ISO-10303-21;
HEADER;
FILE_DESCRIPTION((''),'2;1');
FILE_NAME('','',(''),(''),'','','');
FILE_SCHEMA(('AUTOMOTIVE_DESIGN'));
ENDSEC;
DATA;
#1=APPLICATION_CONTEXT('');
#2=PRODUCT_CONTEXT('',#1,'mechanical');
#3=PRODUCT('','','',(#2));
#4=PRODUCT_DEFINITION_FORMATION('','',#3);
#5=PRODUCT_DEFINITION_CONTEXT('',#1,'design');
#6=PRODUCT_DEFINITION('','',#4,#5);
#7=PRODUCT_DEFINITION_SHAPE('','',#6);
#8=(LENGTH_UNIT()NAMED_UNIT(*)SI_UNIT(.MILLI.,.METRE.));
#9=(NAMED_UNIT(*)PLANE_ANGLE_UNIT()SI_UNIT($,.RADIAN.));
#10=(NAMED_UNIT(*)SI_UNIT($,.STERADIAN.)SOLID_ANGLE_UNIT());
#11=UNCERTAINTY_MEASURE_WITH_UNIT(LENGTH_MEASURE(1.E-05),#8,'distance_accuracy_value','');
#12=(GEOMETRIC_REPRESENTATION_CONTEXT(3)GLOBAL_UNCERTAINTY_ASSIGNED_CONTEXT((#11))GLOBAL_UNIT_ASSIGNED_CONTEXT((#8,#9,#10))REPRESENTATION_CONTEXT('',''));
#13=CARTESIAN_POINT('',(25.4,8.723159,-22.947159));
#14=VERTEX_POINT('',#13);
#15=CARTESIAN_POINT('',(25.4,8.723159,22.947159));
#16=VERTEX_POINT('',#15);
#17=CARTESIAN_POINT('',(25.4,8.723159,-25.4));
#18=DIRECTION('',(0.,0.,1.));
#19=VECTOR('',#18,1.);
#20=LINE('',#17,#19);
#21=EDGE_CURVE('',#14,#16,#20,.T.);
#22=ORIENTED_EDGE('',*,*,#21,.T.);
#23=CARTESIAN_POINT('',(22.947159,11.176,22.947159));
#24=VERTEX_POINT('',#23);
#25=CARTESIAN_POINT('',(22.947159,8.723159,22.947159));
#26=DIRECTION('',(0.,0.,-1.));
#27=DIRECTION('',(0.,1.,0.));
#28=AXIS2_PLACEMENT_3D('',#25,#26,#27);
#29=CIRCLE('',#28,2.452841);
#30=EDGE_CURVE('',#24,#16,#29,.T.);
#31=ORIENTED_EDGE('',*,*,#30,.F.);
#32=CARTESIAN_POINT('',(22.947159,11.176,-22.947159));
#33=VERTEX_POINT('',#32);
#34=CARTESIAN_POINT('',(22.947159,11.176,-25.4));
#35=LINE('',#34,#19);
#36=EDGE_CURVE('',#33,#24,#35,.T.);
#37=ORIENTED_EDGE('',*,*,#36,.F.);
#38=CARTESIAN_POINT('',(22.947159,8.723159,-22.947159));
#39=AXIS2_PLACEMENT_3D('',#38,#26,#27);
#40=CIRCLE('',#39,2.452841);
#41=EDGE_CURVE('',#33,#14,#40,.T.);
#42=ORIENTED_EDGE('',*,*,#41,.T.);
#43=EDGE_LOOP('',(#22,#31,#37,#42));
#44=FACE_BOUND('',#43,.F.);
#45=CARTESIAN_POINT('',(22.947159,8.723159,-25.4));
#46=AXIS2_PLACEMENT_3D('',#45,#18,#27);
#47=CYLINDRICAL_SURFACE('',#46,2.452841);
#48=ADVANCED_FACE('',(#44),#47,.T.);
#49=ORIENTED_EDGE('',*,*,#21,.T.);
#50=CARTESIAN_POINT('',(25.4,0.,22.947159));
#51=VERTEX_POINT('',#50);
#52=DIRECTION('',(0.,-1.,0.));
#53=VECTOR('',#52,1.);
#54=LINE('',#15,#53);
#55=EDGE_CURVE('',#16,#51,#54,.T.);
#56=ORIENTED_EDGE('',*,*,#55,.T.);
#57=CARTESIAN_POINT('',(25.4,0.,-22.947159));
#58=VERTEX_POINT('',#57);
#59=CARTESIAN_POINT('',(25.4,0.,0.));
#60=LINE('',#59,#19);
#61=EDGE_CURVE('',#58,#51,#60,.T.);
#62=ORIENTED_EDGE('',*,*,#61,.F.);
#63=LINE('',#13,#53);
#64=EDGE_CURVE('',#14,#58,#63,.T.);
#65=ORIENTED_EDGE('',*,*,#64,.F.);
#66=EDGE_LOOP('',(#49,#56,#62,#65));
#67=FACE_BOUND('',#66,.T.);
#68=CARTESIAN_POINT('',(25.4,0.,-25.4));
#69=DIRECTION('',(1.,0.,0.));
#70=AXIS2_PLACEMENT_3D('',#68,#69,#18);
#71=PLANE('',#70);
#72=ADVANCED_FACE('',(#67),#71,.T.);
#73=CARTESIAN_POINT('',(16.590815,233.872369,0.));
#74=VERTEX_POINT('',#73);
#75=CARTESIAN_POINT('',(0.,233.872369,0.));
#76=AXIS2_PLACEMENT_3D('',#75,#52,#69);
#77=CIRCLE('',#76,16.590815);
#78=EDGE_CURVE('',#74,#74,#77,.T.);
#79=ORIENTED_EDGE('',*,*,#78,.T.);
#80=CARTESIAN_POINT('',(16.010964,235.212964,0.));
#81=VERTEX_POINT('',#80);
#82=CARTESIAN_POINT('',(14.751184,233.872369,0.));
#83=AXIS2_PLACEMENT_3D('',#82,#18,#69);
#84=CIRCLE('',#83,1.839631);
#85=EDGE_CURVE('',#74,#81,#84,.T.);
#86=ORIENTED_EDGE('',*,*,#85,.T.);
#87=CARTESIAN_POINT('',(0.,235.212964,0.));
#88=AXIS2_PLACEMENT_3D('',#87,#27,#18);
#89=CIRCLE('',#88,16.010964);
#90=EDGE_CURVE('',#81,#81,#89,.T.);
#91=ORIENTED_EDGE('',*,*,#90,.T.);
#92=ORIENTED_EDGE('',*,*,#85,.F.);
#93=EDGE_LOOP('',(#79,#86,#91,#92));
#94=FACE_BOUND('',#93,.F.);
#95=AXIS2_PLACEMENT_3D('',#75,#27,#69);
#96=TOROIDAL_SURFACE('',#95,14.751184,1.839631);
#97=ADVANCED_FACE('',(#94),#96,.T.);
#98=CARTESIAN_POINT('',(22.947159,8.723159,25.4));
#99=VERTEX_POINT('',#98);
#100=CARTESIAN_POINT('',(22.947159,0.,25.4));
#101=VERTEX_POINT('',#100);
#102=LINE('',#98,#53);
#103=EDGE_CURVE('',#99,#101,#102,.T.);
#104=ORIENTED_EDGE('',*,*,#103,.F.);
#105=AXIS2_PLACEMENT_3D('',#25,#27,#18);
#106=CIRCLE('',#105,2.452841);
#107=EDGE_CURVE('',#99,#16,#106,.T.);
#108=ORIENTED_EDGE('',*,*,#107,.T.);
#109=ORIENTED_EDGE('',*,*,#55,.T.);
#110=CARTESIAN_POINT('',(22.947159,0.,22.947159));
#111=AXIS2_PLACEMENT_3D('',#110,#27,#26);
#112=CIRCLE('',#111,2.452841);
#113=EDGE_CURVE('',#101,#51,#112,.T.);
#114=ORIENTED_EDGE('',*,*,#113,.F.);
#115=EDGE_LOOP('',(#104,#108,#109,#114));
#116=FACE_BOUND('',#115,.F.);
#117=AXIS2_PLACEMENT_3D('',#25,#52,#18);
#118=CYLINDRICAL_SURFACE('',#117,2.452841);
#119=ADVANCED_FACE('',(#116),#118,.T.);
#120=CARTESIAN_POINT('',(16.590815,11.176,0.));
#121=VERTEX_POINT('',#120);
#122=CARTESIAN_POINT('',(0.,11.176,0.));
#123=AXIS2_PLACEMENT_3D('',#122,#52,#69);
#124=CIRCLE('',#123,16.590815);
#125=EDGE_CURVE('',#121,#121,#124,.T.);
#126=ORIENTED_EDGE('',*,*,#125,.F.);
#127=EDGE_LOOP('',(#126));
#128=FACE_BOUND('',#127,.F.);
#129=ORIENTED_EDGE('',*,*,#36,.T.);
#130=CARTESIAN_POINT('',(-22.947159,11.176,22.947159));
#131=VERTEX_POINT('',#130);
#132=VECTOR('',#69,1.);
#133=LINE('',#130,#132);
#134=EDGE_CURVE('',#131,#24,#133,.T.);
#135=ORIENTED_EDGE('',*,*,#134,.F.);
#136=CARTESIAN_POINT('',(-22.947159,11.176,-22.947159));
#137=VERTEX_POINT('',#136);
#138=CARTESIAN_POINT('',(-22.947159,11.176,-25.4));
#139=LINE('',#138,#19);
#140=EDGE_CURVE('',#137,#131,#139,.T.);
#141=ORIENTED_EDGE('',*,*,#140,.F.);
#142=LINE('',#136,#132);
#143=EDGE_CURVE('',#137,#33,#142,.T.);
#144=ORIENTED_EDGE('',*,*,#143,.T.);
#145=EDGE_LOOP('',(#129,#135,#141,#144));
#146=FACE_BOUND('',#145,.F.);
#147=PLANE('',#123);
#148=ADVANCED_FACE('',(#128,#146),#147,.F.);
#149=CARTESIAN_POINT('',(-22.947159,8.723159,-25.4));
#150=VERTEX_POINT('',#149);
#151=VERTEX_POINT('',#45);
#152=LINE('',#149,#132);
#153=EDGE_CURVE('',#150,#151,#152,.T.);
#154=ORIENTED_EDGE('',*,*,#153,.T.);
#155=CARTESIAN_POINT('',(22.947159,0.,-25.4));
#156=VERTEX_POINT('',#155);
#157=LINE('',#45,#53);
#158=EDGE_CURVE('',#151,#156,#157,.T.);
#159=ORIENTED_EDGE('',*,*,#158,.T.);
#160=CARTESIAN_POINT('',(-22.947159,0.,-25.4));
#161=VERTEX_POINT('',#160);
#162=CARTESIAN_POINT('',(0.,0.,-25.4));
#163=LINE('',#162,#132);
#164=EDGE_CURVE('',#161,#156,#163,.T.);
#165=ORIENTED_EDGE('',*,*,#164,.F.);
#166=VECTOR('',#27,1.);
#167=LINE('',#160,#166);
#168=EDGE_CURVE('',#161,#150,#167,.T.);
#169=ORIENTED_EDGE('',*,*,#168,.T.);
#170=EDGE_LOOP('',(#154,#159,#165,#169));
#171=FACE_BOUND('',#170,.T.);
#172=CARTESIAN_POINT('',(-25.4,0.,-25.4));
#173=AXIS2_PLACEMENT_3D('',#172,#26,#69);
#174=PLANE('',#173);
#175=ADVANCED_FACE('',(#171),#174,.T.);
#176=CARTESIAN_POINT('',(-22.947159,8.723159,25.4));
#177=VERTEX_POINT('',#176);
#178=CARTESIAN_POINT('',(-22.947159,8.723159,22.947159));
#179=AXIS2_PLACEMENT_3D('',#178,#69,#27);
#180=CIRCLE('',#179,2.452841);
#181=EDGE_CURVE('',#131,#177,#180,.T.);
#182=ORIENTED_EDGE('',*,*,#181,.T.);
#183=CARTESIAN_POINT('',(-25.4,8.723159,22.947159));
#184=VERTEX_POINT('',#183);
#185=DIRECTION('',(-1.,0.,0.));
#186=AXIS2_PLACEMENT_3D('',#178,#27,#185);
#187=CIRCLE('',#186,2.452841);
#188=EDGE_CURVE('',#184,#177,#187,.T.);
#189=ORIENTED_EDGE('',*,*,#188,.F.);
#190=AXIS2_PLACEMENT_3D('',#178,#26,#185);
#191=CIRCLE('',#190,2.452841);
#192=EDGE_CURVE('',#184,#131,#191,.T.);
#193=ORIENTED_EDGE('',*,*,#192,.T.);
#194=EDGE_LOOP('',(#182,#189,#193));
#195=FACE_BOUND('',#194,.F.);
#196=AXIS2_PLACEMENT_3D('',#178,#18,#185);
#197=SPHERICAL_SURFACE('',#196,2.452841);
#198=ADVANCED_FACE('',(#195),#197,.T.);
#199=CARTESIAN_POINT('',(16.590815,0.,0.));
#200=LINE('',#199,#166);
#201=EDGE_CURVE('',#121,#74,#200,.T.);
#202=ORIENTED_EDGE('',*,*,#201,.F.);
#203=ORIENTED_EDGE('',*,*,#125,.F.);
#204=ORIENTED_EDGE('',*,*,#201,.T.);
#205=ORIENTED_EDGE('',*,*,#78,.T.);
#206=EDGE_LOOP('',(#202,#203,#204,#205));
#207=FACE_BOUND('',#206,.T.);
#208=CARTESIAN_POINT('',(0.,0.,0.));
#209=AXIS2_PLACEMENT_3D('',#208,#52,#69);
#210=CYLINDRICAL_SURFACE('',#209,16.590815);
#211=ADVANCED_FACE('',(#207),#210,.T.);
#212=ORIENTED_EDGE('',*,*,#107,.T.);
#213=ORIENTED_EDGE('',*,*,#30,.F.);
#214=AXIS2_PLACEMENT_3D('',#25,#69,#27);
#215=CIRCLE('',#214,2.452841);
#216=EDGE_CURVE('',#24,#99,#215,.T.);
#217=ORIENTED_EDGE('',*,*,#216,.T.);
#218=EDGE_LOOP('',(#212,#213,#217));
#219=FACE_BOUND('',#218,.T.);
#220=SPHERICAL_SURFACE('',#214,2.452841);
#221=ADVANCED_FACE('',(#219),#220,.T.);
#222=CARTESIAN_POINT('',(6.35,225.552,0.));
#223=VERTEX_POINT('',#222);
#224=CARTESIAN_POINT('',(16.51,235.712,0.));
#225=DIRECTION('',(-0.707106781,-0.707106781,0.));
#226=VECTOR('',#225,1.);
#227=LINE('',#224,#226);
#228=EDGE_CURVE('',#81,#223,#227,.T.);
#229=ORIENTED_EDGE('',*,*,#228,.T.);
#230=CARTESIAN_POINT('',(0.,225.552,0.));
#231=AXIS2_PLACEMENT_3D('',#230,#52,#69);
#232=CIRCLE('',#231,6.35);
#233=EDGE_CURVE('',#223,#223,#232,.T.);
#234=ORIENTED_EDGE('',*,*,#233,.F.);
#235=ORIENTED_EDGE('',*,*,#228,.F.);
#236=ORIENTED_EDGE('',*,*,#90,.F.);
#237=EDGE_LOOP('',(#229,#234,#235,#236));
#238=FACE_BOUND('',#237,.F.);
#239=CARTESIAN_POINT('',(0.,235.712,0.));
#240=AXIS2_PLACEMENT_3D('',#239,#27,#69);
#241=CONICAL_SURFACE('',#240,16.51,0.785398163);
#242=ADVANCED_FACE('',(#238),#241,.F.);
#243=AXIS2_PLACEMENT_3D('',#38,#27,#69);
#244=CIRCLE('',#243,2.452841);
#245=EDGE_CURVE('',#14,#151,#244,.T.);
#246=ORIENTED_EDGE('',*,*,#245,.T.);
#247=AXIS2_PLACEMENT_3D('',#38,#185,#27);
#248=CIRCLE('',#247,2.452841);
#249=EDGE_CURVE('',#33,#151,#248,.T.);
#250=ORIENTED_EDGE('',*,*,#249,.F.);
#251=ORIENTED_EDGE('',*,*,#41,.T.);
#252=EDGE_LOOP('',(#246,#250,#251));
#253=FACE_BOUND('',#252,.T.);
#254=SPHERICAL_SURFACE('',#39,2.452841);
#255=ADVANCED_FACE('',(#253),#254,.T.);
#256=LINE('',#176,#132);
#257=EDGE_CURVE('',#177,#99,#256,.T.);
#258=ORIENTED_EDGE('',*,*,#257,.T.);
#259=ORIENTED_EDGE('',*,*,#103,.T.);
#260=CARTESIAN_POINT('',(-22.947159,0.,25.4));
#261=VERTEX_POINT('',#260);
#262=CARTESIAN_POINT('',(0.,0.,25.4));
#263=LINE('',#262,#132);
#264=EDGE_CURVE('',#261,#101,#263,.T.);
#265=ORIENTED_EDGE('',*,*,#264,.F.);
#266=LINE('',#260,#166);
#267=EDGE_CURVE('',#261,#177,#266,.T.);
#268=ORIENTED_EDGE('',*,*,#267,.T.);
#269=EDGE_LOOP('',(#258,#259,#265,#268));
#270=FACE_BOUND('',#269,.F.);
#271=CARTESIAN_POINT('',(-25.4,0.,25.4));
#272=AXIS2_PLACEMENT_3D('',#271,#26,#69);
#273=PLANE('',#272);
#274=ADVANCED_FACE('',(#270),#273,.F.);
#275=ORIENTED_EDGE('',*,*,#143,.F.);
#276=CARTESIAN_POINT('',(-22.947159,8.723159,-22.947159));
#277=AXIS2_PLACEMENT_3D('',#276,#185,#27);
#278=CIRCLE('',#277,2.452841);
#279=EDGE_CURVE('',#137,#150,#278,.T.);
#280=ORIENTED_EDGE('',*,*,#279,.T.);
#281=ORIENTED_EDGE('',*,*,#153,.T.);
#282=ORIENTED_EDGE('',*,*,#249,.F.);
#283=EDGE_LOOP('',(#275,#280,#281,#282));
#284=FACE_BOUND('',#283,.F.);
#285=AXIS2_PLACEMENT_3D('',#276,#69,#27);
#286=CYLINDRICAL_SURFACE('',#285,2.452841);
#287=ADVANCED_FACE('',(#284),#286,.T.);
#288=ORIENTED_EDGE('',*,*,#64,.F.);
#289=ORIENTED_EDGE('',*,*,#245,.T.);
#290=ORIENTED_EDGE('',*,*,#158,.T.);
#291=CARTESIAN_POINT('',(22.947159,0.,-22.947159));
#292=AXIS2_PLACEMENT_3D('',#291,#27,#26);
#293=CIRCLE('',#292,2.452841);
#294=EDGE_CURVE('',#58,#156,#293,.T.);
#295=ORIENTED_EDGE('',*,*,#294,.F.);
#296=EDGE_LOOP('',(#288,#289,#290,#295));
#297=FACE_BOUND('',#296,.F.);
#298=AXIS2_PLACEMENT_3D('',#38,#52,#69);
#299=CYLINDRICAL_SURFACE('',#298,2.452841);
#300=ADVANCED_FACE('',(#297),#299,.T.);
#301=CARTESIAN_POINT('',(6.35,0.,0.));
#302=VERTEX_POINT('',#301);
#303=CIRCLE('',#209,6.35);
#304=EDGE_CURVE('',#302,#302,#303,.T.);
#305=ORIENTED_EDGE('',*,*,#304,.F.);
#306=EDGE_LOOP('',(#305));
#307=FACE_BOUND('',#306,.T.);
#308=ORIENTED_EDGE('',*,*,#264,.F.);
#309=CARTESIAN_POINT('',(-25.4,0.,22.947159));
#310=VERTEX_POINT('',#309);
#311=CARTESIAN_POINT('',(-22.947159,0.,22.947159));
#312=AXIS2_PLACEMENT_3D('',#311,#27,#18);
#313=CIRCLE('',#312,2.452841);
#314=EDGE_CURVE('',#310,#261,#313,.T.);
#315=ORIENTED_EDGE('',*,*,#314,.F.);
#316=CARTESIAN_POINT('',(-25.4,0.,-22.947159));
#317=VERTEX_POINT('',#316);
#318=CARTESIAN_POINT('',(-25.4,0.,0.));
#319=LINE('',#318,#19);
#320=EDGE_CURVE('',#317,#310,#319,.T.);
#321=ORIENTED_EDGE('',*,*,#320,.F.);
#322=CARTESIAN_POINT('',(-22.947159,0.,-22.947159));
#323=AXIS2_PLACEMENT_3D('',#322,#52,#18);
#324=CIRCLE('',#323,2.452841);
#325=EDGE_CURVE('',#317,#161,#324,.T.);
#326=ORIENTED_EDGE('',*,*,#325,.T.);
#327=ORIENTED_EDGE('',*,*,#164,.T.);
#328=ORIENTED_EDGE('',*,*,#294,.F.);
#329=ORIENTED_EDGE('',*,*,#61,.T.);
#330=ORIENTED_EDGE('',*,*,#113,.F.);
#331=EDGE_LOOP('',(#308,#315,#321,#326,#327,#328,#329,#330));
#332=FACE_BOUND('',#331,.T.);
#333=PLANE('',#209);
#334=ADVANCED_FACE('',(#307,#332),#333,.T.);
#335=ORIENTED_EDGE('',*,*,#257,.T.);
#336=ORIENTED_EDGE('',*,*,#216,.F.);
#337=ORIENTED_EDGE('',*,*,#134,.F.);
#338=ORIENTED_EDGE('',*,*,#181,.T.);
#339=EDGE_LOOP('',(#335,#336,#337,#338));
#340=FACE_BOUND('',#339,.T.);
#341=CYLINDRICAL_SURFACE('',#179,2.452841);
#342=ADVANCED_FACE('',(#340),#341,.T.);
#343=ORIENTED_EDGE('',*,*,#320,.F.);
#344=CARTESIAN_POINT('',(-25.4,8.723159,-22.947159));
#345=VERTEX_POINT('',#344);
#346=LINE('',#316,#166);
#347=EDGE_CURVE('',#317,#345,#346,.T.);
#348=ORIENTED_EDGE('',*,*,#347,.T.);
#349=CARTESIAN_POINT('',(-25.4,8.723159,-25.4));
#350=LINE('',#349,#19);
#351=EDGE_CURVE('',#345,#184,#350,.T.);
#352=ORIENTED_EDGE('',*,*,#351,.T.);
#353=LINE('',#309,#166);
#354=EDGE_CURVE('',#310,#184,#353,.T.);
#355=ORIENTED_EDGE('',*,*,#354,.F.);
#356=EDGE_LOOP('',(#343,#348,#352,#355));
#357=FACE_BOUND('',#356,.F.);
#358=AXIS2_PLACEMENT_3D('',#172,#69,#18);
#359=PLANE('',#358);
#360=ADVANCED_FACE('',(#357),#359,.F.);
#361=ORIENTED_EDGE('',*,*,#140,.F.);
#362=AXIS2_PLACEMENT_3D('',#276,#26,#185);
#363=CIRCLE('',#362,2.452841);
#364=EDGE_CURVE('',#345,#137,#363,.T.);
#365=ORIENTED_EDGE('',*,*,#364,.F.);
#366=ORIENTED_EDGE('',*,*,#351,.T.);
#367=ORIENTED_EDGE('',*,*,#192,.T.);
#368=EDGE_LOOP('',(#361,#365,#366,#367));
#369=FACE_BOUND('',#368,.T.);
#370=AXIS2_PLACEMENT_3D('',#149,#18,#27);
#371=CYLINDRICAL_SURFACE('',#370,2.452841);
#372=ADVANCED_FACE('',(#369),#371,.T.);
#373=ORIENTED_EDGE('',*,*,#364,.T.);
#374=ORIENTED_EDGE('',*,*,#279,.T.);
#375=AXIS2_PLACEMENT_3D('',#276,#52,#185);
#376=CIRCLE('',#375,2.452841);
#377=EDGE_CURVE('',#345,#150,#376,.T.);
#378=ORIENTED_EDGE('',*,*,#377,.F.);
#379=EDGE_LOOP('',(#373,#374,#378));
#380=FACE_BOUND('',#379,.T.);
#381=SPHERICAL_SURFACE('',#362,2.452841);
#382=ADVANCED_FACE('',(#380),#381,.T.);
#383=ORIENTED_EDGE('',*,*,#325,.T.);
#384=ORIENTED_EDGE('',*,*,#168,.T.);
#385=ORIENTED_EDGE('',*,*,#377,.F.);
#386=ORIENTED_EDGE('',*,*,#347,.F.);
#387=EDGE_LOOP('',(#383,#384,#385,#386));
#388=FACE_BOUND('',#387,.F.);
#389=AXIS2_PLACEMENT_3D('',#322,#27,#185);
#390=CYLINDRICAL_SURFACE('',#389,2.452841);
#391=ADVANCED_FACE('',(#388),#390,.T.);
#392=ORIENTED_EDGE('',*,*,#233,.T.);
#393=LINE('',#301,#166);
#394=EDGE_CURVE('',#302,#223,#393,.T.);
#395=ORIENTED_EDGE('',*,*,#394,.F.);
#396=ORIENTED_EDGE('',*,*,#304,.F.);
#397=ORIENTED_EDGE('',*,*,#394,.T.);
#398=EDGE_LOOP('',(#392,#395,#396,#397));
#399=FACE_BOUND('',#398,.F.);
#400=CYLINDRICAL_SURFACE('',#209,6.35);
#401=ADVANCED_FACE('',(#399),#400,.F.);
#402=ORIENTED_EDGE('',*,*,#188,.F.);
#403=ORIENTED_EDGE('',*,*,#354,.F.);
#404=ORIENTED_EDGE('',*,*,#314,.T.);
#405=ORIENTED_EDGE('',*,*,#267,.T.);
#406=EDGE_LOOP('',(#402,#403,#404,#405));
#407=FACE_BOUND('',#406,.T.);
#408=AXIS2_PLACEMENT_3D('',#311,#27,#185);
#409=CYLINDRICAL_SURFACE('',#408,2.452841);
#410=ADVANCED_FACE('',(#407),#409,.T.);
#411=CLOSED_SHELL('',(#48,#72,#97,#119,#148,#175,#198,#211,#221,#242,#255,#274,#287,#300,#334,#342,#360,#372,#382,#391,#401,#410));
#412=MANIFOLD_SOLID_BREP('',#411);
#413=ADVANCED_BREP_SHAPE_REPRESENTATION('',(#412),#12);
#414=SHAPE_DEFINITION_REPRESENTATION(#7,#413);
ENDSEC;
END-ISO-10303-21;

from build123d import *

# Parameters (mm, degrees)
F0_W     = 50.8
F0_H     = 50.8
F0_R     = 16.5908146865
F1_DEPTH = 11.176
F0_R_2   = 6.35
F2_DEPTH = 235.712
F3_R     = 2.4528409794
F4_R     = 2.4528409794
F5_R     = 2.4528409794
F6_R     = 2.4528409794
F7_R     = 1.8396307345


# Not quite as in the source:
# - a fillet or chamfer that OpenCascade refuses, or shapes differently, is made with other operations: its cross-section is extruded or revolved along the edge and cut away or added


with BuildPart() as f1:
    # F0 (on Front) → F1 (new body)
    with BuildSketch(Plane.XZ):
        Rectangle(F0_W, F0_H)
        Circle(F0_R, mode=Mode.SUBTRACT)
    extrude(amount=-F1_DEPTH)

    # F0 (on Front) → F2 (join)
    with BuildSketch(Plane.XZ):
        Circle(F0_R)
        Circle(F0_R_2, mode=Mode.SUBTRACT)
    extrude(amount=-F2_DEPTH)

    # F3
    f3_edges = [f1.edges().sort_by_distance(p)[0] for p in [
        (-25.4, 11.176, 0),
    ]]
    fillet(f3_edges, radius=F3_R)

    # F4
    f4_edges = [f1.edges().sort_by_distance(p)[0] for p in [
        (1.22642, 11.176, 25.4),
    ]]
    fillet(f4_edges, radius=F4_R)

    # F5
    f5_edges = [f1.edges().sort_by_distance(p)[0] for p in [
        (25.4, 11.176, -1.22642),
    ]]
    fillet(f5_edges, radius=F5_R)

    # F6
    f6_edges = [f1.edges().sort_by_distance(p)[0] for p in [
        (0, 11.176, -25.4),
    ]]
    fillet(f6_edges, radius=F6_R)

    # F7
    f7_edges = [f1.edges().sort_by_distance(p)[0] for p in [
        (-16.590815, 235.712, 0),
    ]]
    fillet(f7_edges, radius=F7_R)

    # F8: chamfer of 10.16 on 1 edges, made by hand

    # F8_s1 → F8_t2 (revolve, cut)
    with BuildSketch(Plane.XY):
        Polygon((16.51, 235.712), (6.35, 225.552), (6.35, 235.712), align=None)
    revolve(axis=Axis((0, 235.712, 0), (0, -1, 0)), mode=Mode.SUBTRACT)


solid = f1.part
